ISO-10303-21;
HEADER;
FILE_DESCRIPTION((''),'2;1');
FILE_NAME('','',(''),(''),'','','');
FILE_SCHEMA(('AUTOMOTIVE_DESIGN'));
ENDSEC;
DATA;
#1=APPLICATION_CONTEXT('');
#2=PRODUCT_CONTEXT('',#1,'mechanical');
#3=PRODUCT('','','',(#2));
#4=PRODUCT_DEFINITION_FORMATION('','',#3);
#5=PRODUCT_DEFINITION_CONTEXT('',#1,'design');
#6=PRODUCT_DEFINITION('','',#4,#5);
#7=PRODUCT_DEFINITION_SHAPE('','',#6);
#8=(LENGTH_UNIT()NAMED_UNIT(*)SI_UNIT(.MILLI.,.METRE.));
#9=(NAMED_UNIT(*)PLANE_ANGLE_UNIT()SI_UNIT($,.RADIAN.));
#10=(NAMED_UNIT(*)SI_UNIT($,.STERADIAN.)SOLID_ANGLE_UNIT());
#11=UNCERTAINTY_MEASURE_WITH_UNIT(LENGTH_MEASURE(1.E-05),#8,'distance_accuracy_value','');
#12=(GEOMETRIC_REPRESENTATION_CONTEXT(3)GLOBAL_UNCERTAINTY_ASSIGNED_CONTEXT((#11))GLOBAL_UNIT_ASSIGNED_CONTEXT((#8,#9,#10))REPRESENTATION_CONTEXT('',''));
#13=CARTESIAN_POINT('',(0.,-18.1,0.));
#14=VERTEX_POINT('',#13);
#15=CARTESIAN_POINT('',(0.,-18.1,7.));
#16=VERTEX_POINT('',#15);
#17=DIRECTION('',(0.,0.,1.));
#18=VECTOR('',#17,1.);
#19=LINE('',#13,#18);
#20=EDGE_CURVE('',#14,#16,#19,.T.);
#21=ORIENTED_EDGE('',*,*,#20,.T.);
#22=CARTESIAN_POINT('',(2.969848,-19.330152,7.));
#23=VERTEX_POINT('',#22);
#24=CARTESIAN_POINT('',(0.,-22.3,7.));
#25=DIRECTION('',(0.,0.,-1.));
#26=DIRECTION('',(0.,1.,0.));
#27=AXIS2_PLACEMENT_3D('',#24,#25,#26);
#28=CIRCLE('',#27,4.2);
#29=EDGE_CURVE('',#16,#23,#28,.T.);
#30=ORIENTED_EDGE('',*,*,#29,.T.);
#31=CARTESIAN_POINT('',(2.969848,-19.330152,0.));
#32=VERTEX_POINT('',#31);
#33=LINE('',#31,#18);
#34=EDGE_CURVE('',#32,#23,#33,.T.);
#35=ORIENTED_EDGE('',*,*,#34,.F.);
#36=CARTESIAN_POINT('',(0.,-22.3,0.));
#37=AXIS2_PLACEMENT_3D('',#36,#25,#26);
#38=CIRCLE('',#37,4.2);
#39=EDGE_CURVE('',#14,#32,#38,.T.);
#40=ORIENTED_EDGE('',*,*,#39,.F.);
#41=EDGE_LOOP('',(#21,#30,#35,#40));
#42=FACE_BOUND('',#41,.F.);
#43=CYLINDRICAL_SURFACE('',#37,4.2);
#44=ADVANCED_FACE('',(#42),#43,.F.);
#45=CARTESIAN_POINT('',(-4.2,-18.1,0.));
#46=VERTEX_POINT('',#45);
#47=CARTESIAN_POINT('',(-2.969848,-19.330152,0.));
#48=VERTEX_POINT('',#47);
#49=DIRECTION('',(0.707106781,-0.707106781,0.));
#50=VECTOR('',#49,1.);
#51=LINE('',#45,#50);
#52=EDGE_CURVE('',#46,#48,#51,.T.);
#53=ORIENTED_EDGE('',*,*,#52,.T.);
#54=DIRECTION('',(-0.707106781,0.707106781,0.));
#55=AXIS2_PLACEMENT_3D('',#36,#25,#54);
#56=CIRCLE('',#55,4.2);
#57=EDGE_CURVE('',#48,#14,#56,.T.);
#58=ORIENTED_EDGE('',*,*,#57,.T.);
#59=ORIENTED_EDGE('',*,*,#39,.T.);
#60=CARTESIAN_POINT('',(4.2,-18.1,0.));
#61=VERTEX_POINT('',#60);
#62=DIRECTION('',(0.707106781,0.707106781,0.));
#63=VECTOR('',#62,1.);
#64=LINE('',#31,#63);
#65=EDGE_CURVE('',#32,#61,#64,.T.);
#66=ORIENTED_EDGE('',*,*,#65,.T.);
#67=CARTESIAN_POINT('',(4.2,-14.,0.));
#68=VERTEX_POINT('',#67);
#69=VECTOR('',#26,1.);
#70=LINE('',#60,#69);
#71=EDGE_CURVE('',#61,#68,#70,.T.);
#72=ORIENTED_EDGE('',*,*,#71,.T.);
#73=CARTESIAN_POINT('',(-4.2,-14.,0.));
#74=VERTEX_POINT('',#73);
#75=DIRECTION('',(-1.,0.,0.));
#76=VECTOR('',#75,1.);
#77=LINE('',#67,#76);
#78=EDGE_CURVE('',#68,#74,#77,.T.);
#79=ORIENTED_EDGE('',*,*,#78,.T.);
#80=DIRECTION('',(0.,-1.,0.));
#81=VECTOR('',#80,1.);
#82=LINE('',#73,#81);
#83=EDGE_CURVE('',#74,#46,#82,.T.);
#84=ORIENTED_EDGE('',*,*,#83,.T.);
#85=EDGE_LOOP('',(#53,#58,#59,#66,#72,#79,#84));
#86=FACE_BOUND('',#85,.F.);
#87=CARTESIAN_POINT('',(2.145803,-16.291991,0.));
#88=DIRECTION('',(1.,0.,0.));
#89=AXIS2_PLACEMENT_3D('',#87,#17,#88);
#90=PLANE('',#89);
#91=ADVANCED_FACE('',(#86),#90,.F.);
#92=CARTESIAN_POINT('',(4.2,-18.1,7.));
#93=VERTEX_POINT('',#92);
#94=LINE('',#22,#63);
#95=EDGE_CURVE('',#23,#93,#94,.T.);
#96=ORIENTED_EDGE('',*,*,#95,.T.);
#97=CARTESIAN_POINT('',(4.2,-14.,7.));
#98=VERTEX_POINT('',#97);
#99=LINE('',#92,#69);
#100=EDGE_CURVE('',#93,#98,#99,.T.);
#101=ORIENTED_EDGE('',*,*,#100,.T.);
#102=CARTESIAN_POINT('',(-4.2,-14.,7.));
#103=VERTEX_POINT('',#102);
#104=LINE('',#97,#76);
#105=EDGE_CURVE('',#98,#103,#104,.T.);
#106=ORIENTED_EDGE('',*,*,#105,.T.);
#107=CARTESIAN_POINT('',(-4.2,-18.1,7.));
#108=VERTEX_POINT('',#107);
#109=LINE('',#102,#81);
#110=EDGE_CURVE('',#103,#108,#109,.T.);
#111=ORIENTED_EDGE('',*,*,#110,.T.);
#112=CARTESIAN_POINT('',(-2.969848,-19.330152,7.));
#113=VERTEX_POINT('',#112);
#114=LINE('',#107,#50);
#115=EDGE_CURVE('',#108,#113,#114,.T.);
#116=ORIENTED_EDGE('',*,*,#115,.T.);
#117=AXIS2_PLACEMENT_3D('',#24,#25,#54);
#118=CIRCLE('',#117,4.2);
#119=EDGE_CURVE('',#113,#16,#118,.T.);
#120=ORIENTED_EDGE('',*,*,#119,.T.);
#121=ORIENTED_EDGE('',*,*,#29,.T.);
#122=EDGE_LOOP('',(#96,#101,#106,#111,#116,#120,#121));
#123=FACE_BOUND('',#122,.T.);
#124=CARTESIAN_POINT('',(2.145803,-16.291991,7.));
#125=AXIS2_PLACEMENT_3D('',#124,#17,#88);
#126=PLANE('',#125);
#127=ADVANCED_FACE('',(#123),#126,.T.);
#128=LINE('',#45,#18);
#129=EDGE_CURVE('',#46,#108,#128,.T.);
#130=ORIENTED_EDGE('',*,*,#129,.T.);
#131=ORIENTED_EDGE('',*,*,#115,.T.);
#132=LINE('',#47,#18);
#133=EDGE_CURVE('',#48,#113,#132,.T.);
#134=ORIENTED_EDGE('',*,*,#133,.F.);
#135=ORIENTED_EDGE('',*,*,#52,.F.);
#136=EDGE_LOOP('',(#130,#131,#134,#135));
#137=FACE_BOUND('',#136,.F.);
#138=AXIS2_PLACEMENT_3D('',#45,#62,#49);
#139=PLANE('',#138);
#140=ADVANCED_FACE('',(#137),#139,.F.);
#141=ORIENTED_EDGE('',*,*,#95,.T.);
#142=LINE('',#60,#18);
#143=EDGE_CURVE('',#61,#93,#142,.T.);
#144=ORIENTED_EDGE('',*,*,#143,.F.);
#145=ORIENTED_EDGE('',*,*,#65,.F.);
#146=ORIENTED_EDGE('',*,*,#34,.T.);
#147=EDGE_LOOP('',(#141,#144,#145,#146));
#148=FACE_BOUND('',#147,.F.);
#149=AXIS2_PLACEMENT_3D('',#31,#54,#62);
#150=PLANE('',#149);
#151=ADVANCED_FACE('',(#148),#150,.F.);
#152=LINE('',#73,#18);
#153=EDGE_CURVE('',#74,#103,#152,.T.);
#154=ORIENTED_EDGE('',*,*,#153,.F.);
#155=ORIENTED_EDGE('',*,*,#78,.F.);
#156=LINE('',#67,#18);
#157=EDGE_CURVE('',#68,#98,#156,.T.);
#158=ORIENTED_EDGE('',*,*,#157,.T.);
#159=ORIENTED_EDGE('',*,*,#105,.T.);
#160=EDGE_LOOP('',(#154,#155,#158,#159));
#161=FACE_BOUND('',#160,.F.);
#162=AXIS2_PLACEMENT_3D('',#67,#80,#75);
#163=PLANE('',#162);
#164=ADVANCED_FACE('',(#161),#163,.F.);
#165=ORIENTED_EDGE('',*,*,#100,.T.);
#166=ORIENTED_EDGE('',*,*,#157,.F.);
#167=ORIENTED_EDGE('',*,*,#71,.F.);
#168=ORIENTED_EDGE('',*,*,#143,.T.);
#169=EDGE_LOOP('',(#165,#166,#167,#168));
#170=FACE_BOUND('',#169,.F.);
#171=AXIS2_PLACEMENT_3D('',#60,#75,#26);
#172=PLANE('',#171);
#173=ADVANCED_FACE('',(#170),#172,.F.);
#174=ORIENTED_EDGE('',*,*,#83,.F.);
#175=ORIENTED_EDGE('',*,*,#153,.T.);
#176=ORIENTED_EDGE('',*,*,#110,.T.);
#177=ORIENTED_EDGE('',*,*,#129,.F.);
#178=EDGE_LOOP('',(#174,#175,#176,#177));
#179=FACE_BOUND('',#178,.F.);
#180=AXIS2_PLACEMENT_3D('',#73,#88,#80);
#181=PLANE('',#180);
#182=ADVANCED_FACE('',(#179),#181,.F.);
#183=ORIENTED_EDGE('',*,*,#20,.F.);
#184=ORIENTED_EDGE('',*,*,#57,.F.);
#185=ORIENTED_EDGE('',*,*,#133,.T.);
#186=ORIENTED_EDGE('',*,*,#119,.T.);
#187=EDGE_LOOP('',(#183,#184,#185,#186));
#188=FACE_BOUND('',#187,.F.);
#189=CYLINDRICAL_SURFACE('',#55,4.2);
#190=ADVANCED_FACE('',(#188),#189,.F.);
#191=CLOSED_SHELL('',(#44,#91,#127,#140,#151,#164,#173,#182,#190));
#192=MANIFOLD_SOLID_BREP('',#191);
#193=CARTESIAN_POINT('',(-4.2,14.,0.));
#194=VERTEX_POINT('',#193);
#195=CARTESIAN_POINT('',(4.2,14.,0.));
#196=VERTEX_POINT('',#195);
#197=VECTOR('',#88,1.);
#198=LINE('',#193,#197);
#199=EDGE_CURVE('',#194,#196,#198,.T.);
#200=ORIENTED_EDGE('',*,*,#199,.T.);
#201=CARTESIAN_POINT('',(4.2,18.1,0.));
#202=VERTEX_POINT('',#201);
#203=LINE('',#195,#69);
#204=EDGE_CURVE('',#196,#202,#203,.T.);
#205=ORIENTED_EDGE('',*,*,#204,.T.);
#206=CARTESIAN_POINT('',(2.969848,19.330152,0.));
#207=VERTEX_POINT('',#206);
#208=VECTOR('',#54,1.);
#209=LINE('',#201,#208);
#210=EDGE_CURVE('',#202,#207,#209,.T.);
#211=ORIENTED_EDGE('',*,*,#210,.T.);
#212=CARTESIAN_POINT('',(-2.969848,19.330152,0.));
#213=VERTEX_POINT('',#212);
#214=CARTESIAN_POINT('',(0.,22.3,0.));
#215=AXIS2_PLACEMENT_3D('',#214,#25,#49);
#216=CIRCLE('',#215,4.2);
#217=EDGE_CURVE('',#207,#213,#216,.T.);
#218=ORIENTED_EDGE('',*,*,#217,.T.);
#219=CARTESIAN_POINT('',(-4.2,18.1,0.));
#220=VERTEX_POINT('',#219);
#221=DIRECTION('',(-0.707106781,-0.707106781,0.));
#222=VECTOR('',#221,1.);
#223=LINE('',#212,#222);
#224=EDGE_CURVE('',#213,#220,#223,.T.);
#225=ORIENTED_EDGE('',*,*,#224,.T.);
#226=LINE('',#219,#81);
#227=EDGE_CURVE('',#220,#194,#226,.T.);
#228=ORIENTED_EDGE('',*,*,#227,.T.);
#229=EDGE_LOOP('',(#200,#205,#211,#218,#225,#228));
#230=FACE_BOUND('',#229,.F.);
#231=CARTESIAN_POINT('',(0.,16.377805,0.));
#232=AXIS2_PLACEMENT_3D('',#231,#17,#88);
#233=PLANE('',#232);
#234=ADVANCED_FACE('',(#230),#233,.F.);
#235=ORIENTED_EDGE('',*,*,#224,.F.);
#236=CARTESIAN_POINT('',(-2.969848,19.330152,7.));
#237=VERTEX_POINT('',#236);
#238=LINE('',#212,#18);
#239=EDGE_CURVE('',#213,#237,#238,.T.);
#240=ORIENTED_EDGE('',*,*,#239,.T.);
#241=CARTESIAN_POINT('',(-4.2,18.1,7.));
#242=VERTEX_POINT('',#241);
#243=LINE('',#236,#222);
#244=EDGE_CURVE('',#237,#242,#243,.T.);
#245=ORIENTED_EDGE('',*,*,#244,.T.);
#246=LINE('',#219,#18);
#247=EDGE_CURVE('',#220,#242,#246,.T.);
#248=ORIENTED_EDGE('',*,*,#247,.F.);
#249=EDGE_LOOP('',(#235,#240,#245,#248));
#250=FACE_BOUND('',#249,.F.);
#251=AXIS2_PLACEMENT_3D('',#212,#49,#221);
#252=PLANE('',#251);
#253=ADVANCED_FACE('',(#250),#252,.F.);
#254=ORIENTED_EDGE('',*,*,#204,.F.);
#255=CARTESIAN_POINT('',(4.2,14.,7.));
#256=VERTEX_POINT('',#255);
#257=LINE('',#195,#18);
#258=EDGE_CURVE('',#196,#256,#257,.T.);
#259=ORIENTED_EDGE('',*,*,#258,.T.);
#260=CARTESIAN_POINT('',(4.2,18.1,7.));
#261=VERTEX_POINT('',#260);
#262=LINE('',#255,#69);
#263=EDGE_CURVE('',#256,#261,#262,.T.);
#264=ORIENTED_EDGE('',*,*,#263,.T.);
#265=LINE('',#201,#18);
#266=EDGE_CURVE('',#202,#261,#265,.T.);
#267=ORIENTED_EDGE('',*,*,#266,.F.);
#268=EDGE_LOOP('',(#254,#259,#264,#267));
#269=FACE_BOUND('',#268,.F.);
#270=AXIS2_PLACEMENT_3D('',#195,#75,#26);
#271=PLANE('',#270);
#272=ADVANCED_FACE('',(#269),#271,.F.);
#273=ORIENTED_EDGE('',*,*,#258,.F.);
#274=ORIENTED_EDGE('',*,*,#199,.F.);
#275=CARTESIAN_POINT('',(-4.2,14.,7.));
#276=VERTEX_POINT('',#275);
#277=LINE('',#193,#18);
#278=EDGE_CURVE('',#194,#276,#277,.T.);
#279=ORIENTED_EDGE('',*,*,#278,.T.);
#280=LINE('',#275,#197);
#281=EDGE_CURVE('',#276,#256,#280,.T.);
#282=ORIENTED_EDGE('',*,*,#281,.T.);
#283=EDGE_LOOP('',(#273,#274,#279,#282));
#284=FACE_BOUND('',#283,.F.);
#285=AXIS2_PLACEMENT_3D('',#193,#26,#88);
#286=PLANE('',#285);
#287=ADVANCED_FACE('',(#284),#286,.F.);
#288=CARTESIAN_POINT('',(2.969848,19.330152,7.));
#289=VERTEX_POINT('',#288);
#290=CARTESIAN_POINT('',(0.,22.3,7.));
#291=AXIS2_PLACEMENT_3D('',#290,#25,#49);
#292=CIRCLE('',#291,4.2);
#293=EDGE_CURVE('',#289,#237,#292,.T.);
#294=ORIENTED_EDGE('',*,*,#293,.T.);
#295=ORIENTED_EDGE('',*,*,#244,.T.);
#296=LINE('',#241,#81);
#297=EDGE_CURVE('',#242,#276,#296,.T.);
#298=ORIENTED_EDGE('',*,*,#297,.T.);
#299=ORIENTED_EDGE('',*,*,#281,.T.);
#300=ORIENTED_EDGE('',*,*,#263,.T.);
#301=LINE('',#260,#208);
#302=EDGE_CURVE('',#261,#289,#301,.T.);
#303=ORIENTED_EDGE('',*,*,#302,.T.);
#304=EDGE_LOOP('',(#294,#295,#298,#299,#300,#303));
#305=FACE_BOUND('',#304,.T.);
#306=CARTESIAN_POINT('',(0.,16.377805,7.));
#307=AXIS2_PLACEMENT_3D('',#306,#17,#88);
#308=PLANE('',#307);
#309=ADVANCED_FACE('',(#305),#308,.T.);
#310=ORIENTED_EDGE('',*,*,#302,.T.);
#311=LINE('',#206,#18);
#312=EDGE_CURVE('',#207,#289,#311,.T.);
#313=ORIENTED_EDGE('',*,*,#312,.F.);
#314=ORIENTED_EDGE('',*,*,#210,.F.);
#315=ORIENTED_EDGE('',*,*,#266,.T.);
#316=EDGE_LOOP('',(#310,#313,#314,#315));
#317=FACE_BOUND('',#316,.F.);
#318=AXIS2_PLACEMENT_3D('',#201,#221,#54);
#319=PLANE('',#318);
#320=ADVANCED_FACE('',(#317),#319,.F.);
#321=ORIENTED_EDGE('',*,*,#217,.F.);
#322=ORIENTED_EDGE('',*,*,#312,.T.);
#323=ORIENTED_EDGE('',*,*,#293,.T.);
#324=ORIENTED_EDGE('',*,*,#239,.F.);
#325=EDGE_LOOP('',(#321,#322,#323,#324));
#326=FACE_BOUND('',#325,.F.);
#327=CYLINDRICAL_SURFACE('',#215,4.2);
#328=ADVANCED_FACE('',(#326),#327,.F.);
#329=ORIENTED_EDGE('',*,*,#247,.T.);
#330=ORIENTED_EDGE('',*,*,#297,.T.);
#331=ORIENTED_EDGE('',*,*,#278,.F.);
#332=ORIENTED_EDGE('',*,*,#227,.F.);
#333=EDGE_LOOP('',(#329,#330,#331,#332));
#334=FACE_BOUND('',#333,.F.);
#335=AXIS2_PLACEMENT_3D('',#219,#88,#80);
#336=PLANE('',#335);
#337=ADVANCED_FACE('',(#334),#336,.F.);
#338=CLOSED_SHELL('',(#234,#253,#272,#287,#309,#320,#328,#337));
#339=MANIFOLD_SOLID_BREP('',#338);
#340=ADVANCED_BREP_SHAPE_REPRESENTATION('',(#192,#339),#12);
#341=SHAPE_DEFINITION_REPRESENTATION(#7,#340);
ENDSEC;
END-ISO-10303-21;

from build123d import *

# Parameters (mm, degrees)
F1_DEPTH = 7


# Not quite as in the source:
# - a feature names something its author has since deleted; it is built from what else it names


with BuildPart() as f1:
    # F0 (on Top) → F1 (new body)
    with BuildSketch(Plane.XY):
        with BuildLine():
            Line((4.2, -18.1), (4.2, -14))
            Line((4.2, -14), (0, -14))
            Line((0, -14), (0, -18.1))
            ThreePointArc((0, -18.1), (1.6072704159, -18.4197059635), (2.969848481, -19.330151519))
            Line((2.969848481, -19.330151519), (4.2, -18.1))
        make_face()
        with BuildLine():
            Line((0, -14), (-4.2, -14))
            Line((-4.2, -14), (-4.2, -18.1))
            Line((-4.2, -18.1), (-2.969848481, -19.330151519))
            ThreePointArc((-2.969848481, -19.330151519), (-1.6072704159, -18.4197059635), (0, -18.1))
            Line((0, -18.1), (0, -14))
        make_face()
    extrude(amount=F1_DEPTH)


with BuildPart() as f1b:
    # F0 (on Top) → F1, piece 2 (new body)
    with BuildSketch(Plane.XY):
        with BuildLine():
            Line((4.2, 14), (4.2, 18.1))
            Line((4.2, 18.1), (2.969848481, 19.330151519))
            ThreePointArc((2.969848481, 19.330151519), (0, 18.1), (-2.969848481, 19.330151519))
            Line((-2.969848481, 19.330151519), (-4.2, 18.1))
            Line((-4.2, 18.1), (-4.2, 14))
            Line((-4.2, 14), (4.2, 14))
        make_face()
    extrude(amount=F1_DEPTH)


solid = Compound([f1.part, f1b.part])
